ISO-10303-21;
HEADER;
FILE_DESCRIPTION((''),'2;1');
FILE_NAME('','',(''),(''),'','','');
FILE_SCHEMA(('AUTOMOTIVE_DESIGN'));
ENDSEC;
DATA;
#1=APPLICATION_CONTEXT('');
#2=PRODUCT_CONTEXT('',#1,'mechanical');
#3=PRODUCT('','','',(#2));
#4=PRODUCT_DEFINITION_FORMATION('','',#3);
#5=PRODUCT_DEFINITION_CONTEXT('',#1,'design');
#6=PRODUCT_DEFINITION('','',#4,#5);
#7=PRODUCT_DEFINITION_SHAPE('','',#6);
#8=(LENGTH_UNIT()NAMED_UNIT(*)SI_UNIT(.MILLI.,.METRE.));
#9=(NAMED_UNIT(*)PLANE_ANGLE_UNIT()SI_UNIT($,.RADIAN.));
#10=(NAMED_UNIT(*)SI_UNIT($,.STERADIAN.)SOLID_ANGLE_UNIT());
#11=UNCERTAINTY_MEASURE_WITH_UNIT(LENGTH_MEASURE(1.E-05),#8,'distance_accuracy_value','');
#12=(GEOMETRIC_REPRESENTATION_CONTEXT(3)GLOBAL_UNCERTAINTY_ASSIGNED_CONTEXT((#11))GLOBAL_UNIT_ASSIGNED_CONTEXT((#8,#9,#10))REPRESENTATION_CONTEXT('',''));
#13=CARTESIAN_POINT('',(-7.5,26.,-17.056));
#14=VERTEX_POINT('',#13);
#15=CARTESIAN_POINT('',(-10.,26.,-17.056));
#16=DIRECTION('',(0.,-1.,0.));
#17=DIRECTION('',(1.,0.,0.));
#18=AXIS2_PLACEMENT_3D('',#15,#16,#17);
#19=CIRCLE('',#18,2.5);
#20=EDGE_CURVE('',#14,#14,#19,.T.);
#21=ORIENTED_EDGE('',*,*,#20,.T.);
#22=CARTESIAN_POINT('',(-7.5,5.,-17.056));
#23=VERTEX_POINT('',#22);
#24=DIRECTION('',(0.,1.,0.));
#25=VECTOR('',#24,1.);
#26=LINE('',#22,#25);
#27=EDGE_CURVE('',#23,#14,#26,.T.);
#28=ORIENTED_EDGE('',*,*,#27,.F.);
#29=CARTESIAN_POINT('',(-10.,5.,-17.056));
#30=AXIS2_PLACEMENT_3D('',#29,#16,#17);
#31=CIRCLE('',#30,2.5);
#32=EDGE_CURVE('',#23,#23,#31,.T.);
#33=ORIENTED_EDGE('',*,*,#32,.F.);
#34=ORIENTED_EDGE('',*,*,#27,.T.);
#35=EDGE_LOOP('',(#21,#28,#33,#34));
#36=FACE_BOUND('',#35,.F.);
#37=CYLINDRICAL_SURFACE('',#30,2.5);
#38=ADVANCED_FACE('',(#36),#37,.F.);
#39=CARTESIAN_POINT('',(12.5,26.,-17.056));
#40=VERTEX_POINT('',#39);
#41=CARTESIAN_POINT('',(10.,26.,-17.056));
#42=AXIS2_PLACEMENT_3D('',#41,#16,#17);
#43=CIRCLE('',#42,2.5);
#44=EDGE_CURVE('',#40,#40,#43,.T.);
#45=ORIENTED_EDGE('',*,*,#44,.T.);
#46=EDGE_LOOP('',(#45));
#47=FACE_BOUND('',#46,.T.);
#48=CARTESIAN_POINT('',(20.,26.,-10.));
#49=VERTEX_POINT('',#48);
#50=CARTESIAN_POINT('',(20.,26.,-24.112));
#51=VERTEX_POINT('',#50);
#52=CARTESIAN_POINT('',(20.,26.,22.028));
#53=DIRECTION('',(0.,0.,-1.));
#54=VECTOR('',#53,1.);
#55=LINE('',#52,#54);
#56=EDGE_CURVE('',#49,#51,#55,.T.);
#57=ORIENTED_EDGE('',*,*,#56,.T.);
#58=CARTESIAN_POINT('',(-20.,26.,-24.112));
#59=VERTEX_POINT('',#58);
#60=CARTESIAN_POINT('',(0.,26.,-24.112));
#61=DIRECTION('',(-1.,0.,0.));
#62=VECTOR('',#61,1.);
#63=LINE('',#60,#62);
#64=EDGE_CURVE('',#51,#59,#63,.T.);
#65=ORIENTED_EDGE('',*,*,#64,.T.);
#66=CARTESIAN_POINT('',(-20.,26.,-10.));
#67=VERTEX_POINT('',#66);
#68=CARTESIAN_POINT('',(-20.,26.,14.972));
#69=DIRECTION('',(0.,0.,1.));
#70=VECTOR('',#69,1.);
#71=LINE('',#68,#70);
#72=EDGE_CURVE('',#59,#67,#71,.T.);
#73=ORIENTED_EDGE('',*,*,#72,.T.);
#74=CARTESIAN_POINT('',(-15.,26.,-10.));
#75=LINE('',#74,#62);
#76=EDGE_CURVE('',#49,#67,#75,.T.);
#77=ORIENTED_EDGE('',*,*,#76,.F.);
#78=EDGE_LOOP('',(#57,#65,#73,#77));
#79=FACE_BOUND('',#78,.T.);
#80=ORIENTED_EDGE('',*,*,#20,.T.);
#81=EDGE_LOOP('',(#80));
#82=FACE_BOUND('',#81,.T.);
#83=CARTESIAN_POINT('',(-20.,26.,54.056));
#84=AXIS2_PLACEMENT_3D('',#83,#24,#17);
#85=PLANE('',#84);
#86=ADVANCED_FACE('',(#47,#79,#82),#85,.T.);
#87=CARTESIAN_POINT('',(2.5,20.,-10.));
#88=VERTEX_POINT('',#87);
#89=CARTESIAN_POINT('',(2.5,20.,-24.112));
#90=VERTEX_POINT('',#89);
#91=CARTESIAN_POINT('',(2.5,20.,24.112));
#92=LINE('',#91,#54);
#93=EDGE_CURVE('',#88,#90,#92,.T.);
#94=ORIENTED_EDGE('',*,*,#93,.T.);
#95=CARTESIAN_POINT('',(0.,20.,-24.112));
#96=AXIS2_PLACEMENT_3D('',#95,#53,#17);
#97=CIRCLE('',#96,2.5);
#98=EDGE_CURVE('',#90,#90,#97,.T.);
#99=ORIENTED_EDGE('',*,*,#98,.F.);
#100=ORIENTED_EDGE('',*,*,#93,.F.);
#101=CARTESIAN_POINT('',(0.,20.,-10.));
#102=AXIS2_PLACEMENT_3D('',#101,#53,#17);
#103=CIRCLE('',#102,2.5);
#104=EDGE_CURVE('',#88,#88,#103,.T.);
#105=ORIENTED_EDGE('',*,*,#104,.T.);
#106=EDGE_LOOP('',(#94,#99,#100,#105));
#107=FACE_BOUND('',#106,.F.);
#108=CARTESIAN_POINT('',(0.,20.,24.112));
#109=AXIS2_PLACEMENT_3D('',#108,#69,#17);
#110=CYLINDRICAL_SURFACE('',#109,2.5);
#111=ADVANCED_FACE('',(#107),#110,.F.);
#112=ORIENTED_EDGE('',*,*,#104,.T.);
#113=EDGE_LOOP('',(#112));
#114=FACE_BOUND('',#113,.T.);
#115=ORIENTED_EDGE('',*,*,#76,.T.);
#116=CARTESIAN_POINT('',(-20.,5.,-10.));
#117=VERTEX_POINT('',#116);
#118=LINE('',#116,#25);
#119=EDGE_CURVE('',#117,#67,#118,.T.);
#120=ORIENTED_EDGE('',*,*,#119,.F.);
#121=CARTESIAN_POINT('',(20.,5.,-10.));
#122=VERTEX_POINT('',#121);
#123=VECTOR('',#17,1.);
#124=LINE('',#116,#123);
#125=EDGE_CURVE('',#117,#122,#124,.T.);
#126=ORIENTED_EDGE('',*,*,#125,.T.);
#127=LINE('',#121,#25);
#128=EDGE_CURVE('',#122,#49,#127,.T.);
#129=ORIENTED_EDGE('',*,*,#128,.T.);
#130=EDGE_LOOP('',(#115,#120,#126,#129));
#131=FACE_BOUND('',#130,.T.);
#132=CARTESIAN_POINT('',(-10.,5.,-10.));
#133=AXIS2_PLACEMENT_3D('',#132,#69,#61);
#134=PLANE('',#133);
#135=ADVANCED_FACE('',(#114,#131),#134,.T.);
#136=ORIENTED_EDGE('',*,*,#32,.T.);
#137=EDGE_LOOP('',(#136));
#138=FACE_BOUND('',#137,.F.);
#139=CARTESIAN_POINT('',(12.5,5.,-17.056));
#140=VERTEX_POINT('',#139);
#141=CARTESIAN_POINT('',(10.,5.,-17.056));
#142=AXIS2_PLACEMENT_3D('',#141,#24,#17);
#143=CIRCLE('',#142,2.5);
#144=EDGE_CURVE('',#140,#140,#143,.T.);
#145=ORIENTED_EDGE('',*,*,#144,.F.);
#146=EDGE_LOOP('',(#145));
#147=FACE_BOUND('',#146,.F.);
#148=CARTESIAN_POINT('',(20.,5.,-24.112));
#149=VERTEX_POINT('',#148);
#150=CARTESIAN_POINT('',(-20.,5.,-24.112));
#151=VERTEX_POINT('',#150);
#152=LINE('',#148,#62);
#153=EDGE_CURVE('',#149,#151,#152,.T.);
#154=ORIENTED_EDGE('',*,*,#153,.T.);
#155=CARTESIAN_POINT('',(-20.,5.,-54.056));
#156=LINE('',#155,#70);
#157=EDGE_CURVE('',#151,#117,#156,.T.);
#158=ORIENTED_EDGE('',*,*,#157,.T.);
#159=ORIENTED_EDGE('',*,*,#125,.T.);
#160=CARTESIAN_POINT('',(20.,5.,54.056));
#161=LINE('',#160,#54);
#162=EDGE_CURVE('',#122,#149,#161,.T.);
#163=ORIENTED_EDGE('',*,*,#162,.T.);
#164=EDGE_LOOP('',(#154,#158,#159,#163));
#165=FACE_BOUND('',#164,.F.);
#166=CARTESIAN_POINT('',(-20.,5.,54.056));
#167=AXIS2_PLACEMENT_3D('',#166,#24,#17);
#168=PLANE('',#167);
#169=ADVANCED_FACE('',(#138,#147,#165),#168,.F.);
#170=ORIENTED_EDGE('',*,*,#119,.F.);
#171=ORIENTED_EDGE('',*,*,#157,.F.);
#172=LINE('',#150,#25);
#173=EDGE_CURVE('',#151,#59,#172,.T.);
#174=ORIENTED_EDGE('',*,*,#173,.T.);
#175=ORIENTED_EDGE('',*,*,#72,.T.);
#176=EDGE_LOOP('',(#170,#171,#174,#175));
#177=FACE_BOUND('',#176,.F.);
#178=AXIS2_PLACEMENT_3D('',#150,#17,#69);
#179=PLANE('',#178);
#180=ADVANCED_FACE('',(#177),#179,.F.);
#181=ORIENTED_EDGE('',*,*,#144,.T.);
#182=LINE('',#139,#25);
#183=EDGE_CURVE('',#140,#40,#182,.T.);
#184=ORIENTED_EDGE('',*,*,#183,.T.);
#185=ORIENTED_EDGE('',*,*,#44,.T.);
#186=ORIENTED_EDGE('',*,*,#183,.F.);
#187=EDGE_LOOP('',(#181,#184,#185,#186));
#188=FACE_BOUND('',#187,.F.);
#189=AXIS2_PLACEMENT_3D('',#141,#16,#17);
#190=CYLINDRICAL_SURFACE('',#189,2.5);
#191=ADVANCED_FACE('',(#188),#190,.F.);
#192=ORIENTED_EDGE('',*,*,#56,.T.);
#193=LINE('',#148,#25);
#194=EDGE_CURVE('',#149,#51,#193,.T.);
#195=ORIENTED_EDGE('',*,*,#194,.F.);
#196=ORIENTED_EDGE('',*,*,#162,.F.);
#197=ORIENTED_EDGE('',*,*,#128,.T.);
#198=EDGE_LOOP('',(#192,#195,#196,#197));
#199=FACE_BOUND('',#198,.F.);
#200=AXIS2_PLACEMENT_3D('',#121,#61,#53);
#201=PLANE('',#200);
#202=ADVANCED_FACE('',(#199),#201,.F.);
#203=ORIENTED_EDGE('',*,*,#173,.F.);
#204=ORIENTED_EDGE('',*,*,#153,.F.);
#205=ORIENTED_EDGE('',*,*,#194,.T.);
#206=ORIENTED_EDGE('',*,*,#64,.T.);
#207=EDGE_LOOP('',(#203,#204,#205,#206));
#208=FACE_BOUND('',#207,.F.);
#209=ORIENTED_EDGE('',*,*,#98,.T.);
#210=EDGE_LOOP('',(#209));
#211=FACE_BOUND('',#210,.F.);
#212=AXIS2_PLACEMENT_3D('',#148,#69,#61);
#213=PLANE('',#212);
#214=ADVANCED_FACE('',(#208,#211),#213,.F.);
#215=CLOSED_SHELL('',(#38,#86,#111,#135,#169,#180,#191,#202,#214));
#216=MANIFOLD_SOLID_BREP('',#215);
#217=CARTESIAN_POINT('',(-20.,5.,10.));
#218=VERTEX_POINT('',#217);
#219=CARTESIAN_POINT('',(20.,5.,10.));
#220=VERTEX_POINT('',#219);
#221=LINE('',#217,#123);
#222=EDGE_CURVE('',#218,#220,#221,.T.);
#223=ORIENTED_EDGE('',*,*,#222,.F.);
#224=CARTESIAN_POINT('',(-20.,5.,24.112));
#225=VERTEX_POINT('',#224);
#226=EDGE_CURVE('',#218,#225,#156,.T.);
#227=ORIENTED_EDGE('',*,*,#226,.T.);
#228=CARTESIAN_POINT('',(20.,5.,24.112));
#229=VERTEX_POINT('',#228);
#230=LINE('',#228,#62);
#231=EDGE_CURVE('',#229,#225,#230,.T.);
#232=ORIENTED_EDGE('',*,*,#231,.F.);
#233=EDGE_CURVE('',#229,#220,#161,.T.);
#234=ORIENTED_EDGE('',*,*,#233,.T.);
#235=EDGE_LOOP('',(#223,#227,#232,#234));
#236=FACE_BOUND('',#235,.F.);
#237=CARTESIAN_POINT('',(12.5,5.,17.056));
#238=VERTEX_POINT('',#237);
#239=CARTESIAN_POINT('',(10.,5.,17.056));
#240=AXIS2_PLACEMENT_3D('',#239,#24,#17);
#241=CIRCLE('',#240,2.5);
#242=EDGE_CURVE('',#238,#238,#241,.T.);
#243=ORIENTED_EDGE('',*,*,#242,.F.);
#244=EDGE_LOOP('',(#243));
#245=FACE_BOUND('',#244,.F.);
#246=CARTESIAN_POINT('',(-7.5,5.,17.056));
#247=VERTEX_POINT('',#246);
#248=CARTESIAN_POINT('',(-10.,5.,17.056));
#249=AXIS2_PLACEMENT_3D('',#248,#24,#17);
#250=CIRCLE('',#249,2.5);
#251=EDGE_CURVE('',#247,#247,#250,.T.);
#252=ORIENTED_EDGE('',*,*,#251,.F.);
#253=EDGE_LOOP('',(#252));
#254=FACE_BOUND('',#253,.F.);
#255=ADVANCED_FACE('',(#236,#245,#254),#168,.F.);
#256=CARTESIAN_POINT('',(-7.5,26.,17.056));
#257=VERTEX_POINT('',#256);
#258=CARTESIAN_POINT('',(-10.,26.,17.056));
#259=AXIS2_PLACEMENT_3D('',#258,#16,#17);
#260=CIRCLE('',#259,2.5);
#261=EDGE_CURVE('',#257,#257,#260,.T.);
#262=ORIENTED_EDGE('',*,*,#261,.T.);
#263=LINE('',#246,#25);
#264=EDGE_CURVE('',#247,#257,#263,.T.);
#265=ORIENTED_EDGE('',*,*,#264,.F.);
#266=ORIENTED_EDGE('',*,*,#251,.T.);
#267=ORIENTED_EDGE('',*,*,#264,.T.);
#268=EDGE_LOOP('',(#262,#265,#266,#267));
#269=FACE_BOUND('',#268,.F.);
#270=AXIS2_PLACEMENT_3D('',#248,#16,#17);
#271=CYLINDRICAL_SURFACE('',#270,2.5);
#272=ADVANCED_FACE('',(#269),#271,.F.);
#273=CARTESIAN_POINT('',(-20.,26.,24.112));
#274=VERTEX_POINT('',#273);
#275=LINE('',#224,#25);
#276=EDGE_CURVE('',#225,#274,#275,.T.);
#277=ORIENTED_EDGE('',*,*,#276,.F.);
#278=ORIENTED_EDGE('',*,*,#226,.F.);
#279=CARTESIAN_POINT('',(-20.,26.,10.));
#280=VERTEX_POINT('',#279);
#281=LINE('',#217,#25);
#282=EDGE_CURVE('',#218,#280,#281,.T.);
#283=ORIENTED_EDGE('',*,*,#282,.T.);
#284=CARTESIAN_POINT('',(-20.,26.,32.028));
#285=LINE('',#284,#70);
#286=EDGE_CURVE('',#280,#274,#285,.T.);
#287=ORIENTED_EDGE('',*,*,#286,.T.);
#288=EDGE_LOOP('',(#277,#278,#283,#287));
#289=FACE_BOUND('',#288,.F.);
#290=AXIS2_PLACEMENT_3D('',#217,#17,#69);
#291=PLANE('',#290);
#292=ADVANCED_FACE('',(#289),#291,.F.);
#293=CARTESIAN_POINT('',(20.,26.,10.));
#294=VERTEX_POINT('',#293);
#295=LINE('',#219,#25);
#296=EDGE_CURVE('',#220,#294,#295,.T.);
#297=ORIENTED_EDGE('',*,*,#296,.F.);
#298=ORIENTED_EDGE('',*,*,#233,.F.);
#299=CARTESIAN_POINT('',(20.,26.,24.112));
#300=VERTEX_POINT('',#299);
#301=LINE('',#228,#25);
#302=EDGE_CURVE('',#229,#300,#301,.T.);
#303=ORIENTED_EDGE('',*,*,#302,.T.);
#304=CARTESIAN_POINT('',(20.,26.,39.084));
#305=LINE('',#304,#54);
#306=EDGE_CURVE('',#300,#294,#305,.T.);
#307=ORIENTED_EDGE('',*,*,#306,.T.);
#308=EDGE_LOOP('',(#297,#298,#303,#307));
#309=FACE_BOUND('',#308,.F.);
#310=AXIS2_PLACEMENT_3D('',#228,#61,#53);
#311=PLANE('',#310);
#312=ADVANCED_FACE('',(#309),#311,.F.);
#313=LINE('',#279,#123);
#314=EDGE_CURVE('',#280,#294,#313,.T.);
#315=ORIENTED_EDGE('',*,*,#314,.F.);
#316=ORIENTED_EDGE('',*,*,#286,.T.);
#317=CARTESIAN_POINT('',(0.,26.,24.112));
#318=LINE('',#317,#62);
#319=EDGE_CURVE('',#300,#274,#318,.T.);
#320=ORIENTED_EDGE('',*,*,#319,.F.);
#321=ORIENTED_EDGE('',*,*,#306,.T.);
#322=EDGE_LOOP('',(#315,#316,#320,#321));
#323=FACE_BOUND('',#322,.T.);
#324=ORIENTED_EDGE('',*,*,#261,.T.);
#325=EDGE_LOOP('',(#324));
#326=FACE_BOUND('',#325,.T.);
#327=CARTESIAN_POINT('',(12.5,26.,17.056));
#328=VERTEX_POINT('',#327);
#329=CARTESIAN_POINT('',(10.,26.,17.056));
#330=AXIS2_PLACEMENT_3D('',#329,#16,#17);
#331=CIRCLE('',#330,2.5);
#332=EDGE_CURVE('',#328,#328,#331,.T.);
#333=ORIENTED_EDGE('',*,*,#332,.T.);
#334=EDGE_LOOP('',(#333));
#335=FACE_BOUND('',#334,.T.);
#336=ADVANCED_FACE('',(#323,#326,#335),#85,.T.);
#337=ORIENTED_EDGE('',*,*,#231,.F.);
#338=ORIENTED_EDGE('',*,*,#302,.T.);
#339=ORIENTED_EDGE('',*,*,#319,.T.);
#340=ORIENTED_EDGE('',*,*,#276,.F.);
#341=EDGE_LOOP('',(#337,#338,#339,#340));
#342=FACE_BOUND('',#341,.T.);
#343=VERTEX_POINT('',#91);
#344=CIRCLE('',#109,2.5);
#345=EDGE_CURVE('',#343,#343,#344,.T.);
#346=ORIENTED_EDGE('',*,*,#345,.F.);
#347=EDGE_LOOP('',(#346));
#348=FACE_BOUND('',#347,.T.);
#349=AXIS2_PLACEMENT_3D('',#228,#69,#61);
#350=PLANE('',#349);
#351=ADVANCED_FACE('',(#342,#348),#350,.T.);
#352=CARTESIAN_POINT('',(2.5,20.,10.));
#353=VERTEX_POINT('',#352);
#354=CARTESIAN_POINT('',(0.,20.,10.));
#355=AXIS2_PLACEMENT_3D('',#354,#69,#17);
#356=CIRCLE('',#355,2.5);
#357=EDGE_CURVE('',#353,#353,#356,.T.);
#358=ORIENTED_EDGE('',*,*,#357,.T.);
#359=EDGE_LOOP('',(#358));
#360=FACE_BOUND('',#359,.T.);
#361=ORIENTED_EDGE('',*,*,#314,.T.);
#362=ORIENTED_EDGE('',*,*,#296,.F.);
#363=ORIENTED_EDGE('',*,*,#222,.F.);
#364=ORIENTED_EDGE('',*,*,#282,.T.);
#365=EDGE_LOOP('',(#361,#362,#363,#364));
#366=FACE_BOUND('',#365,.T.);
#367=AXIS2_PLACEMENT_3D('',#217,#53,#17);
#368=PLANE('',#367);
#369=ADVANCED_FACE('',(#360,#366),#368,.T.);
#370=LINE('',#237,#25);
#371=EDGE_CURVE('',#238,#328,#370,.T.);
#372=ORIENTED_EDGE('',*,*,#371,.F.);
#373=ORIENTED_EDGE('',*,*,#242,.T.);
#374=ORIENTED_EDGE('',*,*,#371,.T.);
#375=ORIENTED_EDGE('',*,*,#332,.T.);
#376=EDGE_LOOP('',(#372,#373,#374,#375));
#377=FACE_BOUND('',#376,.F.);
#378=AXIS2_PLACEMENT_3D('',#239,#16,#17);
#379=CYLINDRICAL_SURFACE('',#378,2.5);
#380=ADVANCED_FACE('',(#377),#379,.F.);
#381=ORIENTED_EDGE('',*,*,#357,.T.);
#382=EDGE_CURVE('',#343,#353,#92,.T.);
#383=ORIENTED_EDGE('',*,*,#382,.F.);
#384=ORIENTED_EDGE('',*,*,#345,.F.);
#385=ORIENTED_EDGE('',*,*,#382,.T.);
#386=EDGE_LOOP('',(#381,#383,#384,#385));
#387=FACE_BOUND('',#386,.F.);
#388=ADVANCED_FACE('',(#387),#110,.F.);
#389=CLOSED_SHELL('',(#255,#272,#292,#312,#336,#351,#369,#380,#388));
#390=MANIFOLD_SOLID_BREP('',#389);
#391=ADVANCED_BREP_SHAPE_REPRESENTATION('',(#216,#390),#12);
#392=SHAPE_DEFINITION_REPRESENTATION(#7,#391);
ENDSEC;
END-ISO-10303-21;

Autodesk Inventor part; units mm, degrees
ref_plane "Work Plane1" through (-20, 5, 54.056) normal (0, 1, 0) x (1, 0, 0)
sketch "Sketch2" plane through (-20, 5, 54.056) normal (0, 1, 0) x (1, 0, 0)
  point P0 (20, 54.056)
ref_plane "Work Plane2" through (-20, 5, 54.056) normal (0, 1, 0) x (1, 0, 0)
sketch "Sketch3" plane through (-20, 5, 54.056) normal (0, 1, 0) x (1, 0, 0)
  circle A0 centre (10, 71.112) radius 2.5 projected
  circle A1 centre (10, 37) radius 2.5 projected
  line L0 (10, 71.112) -> (10, 64.056)
  line L1 (10, 64.056) -> (0, 64.056)
  line L2 (0, 108.112) -> (0, 0) projected
  line L3 (40, 0) -> (40, 108.112) projected
  line L4 (0, 64.056) -> (40, 64.056)
  line L5 (40, 64.056) -> (40, 78.168)
  line L6 (40, 78.168) -> (0, 78.168)
  line L7 (0, 78.168) -> (0, 64.056)
  line L8 (20, 54.056) -> (40, 54.056)
  line L9 (0, 0) -> (0, 108.112)
  line L10 (40, 108.112) -> (40, 0)
  line L11 (0, 44.056) -> (40, 44.056)
  line L12 (40, 29.944) -> (0, 29.944)
  circle A2 centre (30, 71.112) radius 2.5 projected
  circle A3 centre (30, 71.112) radius 2.5
  circle A4 centre (30, 37) radius 2.5 projected
  circle A5 centre (30, 37) radius 2.5
  dimension "d1" = 7.056
  dimension "d2" = 14.112
extrude "Extrusion1" add sketch "Sketch3" along normal blind 25 contours L1 L2 L6 L3 L4 | L11 L3 L12 L2
sketch "Sketch4" plane through (-20, 5, 24.112) normal (0, 0, 1) x (1, 0, 0)
  line L0 (40, 25) -> (0, 25) projected
  line L1 (0, 25) -> (20, 25)
  line L2 (20, 25) -> (20, 15)
  circle A0 centre (20, 15) radius 2.5
  point P0 (20, -5)
  dimension "d5" = 10
  dimension "d6" = 5
extrude "Extrusion2" cut sketch "Sketch4" against normal through all
ref_plane "Work Plane3" through (-20, 30, 54.056) normal (0, 1, 0) x (1, 0, 0)
sketch "Sketch6" plane through (-20, 30, 54.056) normal (0, 1, 0) x (1, 0, 0)
  line L0 (55.7566, 97.8205) -> (-24.6957, 97.8205)
  line L1 (-24.6957, 97.8205) -> (-24.6957, 9.1741)
  line L2 (-24.6957, 9.1741) -> (55.7566, 9.1741)
  line L3 (55.7566, 9.1741) -> (55.7566, 97.8205)
  point P0 (20, 54.056)
extrude "Extrusion4" cut sketch "Sketch6" against normal blind 4
properties part number "linac_lower_ax_2020_mnt" material "PET Plastic"
